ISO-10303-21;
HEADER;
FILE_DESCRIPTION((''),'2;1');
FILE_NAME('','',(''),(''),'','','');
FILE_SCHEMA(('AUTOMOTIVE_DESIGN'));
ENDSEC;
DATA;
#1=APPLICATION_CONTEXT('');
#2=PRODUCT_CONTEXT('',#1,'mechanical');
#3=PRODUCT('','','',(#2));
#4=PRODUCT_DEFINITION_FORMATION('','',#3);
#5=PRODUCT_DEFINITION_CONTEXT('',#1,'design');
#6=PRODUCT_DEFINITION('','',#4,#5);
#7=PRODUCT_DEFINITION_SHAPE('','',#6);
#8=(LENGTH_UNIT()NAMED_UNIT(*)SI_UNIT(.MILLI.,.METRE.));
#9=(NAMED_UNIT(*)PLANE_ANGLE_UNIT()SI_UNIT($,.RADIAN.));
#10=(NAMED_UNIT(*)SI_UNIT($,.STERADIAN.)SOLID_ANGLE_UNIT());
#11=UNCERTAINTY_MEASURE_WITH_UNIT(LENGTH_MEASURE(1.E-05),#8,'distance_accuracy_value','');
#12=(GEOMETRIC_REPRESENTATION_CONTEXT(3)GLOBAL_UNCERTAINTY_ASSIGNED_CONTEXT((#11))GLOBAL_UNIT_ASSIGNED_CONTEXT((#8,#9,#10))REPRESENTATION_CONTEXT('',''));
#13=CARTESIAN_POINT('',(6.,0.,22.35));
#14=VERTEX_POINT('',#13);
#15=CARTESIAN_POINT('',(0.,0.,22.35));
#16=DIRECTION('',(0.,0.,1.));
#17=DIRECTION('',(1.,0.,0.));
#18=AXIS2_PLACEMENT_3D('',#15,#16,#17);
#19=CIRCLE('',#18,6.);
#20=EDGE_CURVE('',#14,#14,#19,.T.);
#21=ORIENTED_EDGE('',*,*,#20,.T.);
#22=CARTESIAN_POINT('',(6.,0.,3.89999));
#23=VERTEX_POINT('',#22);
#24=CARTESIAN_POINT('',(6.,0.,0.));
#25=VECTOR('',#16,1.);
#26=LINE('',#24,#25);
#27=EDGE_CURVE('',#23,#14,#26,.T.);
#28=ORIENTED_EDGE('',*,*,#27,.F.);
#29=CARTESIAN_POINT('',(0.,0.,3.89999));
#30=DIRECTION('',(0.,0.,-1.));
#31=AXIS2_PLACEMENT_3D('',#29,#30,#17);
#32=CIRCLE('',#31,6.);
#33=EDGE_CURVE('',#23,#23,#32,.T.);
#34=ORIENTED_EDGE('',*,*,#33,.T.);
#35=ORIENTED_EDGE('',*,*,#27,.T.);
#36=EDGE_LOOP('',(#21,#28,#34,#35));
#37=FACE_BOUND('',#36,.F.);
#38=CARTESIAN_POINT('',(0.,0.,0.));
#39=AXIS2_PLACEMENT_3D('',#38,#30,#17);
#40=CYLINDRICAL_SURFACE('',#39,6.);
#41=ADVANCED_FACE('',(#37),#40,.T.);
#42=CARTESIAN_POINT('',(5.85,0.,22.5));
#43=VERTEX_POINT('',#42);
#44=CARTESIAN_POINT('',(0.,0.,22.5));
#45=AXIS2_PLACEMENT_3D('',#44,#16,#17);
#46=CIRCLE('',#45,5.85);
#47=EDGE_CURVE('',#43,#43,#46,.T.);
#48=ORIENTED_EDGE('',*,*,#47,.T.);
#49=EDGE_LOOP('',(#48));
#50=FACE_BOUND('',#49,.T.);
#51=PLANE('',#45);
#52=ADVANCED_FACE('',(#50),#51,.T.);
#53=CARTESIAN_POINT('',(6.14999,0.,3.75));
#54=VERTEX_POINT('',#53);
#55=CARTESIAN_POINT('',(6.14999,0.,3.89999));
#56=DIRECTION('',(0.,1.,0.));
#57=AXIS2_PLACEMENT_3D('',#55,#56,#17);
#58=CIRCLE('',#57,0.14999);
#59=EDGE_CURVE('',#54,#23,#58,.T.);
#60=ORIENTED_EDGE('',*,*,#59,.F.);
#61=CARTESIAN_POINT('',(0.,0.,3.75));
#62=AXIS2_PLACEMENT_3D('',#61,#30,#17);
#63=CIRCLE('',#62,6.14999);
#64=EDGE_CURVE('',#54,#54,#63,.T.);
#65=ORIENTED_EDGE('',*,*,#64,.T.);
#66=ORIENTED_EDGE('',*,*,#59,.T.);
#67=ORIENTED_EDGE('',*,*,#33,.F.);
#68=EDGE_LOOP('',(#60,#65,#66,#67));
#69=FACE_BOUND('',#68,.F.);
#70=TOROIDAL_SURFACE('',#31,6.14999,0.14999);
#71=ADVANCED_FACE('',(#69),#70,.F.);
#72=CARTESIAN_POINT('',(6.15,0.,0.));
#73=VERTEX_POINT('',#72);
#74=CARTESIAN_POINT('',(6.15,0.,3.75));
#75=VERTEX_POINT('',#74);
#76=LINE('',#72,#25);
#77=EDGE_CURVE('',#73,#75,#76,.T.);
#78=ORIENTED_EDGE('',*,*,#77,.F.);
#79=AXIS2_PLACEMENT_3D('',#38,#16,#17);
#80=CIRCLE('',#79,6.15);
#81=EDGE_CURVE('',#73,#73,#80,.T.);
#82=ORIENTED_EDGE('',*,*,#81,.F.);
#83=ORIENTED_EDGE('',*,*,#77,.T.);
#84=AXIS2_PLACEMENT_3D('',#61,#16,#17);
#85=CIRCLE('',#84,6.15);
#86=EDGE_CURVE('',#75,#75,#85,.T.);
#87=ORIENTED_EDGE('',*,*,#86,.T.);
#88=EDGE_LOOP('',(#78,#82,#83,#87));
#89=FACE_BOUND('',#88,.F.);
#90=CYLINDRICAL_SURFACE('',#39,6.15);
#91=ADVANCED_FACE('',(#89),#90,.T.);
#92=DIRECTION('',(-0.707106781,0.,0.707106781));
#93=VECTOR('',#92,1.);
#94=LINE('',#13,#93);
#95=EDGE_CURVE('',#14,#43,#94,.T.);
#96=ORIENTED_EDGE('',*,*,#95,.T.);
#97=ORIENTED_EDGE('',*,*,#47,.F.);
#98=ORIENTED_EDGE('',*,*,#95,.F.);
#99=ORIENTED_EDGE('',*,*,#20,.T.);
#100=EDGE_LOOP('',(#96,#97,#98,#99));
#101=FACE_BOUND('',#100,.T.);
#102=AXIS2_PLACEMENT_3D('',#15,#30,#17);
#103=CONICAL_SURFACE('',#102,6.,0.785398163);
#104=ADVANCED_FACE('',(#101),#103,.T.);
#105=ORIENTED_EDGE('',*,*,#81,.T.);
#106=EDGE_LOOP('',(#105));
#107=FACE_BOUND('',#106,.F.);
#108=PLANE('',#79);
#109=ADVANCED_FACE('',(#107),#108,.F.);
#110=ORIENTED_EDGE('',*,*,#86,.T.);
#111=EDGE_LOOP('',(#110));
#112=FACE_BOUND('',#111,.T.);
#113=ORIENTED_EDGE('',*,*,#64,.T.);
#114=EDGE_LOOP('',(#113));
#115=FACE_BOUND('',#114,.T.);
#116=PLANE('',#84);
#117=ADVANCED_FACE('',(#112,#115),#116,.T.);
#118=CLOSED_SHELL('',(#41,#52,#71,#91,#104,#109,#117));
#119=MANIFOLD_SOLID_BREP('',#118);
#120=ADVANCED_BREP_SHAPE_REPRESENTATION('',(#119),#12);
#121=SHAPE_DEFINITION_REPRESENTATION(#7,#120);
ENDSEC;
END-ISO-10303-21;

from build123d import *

# Parameters (mm, degrees)
F0_R     = 6
F1_DEPTH = 22.5
F2_R     = 6.15
F3_DEPTH = 3.75
F4_R     = 0.14999
F5_SIZE2 = 0.15
F5_SIZE  = 0.15


# Not quite as in the source:
# - a fillet or chamfer is up to 0.001 mm smaller than in the source, because OpenCascade refuses the exact size


with BuildPart() as f1:
    # F0 (on Top) → F1 (new body)
    with BuildSketch(Plane.XY):
        Circle(F0_R)
    extrude(amount=F1_DEPTH)

    # F2 (on Top) → F3 (join)
    with BuildSketch(Plane.XY):
        Circle(F2_R)
    extrude(amount=F3_DEPTH)

    # F4 (radius 0.15 in the source; OpenCascade refuses exactly that, so slightly less here)
    f4_edges = [f1.edges().sort_by_distance(p)[0] for p in [
        (-6, 0, 3.75),
    ]]
    fillet(f4_edges, radius=F4_R)

    # F5
    f5_edges = [f1.edges().sort_by_distance(p)[0] for p in [
        (-6, 0, 22.5),
    ]]
    chamfer(f5_edges, length=F5_SIZE, length2=F5_SIZE2)


solid = f1.part
